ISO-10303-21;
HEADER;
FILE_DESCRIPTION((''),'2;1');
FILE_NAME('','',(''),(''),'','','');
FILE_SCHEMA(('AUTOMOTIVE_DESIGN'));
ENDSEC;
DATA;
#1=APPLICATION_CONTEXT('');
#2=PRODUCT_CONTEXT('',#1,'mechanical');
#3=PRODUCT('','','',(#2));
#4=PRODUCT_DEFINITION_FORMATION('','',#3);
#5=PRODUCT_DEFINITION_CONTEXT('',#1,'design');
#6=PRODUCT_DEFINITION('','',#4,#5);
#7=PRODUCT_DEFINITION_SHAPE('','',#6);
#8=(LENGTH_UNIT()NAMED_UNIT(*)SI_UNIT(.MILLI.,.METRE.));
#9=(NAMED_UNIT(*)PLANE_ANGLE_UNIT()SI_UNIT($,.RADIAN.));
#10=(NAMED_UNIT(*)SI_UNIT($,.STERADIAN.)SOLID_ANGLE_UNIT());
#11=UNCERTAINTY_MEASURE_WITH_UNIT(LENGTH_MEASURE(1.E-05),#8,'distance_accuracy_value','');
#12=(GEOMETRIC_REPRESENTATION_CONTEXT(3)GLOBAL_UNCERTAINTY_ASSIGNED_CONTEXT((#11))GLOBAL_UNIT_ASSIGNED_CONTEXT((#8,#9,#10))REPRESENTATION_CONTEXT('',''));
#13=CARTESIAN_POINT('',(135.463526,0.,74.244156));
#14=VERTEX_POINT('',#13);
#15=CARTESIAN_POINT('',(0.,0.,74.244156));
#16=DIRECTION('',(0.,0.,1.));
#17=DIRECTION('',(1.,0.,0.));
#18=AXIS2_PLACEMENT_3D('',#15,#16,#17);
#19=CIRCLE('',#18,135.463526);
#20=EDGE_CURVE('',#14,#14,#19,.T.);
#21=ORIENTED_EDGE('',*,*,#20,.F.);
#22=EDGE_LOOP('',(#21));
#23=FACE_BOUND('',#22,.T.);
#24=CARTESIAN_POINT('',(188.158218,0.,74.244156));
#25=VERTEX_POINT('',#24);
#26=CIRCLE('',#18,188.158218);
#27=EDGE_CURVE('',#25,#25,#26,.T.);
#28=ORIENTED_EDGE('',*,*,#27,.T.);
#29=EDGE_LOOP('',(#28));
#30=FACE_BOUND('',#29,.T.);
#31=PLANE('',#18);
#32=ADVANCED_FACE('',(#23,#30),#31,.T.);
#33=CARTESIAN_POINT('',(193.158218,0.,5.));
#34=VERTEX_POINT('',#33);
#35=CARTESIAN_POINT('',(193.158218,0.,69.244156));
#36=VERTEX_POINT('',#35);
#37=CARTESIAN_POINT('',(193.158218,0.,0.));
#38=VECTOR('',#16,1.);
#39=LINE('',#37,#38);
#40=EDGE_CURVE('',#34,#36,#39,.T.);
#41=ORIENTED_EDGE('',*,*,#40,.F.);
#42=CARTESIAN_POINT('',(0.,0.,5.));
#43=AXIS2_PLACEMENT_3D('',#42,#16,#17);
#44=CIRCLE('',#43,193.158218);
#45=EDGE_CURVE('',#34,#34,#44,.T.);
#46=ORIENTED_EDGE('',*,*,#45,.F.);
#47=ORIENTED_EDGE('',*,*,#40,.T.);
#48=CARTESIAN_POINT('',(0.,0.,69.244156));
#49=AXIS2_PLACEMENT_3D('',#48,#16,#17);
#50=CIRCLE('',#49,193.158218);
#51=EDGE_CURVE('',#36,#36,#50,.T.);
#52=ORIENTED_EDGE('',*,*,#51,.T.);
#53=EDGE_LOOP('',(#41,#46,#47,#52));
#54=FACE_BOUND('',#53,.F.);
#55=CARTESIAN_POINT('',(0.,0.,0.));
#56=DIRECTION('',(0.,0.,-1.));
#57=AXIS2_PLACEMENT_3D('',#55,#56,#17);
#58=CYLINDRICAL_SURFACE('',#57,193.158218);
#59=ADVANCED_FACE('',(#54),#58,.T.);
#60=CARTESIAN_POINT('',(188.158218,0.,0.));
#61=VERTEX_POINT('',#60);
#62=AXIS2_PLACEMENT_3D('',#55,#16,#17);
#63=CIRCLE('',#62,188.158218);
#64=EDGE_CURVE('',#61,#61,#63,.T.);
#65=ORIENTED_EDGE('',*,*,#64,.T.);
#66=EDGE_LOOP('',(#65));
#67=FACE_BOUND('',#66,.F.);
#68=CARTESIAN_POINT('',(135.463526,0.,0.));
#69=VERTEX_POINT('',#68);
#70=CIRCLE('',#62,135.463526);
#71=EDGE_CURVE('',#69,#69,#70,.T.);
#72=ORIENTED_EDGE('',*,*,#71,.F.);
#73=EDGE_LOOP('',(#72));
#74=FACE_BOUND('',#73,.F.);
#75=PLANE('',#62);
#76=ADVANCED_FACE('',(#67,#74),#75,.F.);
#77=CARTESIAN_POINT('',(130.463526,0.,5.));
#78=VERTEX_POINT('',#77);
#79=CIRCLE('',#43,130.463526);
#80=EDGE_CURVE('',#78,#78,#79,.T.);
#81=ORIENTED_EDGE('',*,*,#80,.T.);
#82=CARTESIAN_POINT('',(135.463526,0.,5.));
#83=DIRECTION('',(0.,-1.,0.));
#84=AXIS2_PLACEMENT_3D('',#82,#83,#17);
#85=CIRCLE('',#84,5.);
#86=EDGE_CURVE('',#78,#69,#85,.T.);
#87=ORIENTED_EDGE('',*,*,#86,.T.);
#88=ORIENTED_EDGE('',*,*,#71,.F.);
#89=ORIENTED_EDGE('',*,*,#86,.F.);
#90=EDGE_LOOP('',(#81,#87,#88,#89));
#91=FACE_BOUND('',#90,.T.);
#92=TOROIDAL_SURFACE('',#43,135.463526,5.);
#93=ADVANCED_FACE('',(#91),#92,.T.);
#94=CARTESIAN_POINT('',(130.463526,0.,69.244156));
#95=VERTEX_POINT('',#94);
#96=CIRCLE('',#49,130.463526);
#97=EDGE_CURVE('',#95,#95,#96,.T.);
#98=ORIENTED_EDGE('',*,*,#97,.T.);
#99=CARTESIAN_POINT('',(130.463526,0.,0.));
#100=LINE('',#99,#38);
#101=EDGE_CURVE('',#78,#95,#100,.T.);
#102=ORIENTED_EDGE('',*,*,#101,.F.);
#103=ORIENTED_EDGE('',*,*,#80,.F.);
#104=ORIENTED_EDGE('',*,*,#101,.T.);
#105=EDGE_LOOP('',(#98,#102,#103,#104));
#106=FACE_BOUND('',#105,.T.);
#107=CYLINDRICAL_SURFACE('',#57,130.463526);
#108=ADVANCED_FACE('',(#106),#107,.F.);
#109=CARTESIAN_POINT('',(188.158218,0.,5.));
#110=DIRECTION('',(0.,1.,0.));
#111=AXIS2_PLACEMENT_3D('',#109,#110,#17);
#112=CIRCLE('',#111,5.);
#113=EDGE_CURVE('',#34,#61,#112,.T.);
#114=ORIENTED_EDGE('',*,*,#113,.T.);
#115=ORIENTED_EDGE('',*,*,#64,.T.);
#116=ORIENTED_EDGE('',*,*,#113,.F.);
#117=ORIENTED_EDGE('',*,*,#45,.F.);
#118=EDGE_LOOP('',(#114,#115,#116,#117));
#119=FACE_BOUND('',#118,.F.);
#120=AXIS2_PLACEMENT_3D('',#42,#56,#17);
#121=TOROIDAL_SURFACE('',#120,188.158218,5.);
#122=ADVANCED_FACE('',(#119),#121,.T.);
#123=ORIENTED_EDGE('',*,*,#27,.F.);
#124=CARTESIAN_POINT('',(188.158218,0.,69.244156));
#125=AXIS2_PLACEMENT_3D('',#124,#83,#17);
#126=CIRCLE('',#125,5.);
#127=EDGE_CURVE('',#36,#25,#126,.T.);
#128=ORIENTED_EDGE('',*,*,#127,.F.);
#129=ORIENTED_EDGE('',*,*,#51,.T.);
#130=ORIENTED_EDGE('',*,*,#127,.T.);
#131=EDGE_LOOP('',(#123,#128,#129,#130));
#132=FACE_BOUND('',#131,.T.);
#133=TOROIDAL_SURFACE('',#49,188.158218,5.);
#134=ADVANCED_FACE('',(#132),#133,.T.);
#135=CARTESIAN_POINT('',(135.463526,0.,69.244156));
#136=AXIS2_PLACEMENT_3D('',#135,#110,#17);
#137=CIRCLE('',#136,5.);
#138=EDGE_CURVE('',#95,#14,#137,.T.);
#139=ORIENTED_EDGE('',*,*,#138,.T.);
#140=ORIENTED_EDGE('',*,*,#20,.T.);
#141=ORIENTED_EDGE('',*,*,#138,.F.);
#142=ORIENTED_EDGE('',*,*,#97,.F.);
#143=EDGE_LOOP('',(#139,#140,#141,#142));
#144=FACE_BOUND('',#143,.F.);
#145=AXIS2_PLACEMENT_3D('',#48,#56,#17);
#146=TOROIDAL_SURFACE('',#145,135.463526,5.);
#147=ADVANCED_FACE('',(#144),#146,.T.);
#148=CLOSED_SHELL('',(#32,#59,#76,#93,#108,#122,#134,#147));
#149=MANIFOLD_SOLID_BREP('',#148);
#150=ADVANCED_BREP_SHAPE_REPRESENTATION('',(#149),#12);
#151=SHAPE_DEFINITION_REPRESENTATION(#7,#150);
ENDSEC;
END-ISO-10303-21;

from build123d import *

# Parameters (mm, degrees)
F0_R     = 193.1582177029
F0_R_2   = 191.8011573182
F0_R_3   = 130.4635260733
F1_DEPTH = 74.2441564798
F5_R     = 5


# Not quite as in the source:
# - the program builds the solid bodies; features that only make, move or delete a surface that nothing else refers to are left out


with BuildPart() as f1:
    # F0 (on Top) → F1 (new body)
    with BuildSketch(Plane.XY):
        Circle(F0_R)
        Circle(F0_R_2, mode=Mode.SUBTRACT)
        Circle(F0_R_2)
        Circle(F0_R_3, mode=Mode.SUBTRACT)
    extrude(amount=F1_DEPTH)

    # F5
    f5_edges = [f1.edges().sort_by_distance(p)[0] for p in [
        (-193.158218, 0, 74.244156),
        (-130.463526, 0, 0),
        (-193.158218, 0, 0),
        (-130.463526, 0, 74.244156),
    ]]
    fillet(f5_edges, radius=F5_R)


solid = f1.part
